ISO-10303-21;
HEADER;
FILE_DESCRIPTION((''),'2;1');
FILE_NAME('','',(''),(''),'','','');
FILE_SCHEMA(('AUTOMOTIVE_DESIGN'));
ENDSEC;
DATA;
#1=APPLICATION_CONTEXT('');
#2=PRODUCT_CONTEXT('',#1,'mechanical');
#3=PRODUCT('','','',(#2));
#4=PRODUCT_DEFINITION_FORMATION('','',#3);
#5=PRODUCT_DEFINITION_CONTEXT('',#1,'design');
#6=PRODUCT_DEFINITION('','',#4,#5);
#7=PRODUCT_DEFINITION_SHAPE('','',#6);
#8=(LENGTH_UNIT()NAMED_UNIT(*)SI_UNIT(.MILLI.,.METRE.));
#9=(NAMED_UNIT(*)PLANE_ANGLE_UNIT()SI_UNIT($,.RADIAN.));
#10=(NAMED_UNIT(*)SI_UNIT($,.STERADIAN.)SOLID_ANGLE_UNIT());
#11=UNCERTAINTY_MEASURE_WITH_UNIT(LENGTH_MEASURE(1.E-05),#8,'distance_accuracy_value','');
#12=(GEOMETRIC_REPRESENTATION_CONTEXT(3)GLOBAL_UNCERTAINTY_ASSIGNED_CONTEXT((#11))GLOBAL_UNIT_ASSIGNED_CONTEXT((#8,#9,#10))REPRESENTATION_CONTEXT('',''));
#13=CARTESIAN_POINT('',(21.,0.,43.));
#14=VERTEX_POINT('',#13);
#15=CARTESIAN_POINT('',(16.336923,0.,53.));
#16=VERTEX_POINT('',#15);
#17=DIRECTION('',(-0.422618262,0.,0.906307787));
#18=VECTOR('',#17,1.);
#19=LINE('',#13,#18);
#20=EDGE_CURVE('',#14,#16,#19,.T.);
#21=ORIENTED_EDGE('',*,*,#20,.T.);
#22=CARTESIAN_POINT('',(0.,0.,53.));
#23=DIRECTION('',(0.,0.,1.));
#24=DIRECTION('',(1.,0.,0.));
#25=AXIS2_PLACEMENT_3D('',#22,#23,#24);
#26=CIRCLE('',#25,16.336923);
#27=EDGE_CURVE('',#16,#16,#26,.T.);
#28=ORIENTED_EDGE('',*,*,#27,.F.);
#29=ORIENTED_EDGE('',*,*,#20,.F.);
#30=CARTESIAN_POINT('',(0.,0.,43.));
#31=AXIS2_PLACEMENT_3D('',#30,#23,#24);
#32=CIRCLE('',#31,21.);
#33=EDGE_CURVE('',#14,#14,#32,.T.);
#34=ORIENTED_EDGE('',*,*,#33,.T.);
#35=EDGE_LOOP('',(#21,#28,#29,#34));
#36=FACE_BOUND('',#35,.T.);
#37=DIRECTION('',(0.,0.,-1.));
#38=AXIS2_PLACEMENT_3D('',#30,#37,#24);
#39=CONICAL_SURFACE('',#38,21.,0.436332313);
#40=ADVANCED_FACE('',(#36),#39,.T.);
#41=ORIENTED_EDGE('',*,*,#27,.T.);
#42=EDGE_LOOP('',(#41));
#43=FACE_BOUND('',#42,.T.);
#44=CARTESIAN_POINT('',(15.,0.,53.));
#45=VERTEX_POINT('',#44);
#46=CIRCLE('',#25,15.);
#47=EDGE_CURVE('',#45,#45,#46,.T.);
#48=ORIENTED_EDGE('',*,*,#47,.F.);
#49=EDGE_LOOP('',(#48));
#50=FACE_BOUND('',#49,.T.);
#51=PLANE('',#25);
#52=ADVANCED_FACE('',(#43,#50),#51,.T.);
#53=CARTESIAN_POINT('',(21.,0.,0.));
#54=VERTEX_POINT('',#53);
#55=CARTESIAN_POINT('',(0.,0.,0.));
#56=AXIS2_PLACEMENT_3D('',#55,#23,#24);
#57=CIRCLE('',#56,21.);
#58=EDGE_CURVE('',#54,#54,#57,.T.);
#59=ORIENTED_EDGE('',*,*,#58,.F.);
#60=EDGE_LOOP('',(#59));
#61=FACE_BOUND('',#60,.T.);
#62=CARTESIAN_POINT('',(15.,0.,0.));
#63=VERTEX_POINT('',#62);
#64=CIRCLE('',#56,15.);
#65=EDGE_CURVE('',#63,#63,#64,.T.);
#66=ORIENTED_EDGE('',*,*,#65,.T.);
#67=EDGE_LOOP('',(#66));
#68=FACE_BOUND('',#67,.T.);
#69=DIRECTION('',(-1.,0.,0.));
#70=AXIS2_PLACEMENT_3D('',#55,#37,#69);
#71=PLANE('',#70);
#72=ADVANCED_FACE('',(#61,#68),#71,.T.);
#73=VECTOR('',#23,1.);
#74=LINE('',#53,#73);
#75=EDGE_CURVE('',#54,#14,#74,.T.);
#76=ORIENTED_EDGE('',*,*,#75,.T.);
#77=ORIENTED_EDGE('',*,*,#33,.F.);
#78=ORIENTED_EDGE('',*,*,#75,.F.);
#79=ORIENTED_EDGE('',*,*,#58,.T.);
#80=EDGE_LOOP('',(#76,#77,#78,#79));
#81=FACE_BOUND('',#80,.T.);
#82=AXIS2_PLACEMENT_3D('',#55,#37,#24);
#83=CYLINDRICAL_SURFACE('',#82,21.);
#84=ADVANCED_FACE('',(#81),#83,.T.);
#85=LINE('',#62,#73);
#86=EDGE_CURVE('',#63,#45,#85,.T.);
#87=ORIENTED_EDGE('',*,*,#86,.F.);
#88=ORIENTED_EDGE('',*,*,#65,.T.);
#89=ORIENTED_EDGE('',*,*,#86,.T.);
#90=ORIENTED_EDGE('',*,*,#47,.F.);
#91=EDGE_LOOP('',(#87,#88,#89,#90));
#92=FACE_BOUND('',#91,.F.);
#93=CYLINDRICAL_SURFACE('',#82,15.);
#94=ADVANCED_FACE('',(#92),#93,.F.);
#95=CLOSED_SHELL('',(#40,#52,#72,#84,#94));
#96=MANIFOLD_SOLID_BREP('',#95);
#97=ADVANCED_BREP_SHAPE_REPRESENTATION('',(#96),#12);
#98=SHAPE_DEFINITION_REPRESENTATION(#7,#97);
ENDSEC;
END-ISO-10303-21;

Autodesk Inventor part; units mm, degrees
ref_plane "YZ Plane" through (0, 0, 0) normal (1, 0, 0) x (0, 1, 0)
ref_plane "XZ Plane" through (0, 0, 0) normal (0, 1, 0) x (-1, 0, 0)
ref_plane "XY Plane" through (0, 0, 0) normal (0, 0, 1) x (1, 0, 0)
sketch "Sketch1" plane through (0, 0, 0) normal (0, 0, 1) x (1, 0, 0)
  circle A0 centre (0, 0) radius 15
  circle A1 centre (0, 0) radius 21
  dimension "d0" = 30
  dimension "d1" = 42
extrude "Extrusion1" add sketch "Sketch1" along normal blind 53
sketch "Sketch2" plane through (0, 0, 0) normal (0, 0, -1) x (-1, 0, 0)
  circle A0 centre (0, 0) radius 17.5
  circle A1 centre (0, 0) radius 21
  dimension "d4" = 35
  dimension "d5" = 42
extrude "Extrusion2" add sketch "Sketch2" along normal blind 5
chamfer "Chamfer2" distance 10 angle 25 1 edges at (-21, 0, 53) measured on face at (20.9319, -1.6898, 35.3333)
thicken "Thicken1" operation add thickness 5 both sides no extend neighbours yes toward (0, 0, 1) faces at (-19.4604, -3.0712, -5)
properties part number "Nikon-Objective-Insulation" material "ABS Plastic"
